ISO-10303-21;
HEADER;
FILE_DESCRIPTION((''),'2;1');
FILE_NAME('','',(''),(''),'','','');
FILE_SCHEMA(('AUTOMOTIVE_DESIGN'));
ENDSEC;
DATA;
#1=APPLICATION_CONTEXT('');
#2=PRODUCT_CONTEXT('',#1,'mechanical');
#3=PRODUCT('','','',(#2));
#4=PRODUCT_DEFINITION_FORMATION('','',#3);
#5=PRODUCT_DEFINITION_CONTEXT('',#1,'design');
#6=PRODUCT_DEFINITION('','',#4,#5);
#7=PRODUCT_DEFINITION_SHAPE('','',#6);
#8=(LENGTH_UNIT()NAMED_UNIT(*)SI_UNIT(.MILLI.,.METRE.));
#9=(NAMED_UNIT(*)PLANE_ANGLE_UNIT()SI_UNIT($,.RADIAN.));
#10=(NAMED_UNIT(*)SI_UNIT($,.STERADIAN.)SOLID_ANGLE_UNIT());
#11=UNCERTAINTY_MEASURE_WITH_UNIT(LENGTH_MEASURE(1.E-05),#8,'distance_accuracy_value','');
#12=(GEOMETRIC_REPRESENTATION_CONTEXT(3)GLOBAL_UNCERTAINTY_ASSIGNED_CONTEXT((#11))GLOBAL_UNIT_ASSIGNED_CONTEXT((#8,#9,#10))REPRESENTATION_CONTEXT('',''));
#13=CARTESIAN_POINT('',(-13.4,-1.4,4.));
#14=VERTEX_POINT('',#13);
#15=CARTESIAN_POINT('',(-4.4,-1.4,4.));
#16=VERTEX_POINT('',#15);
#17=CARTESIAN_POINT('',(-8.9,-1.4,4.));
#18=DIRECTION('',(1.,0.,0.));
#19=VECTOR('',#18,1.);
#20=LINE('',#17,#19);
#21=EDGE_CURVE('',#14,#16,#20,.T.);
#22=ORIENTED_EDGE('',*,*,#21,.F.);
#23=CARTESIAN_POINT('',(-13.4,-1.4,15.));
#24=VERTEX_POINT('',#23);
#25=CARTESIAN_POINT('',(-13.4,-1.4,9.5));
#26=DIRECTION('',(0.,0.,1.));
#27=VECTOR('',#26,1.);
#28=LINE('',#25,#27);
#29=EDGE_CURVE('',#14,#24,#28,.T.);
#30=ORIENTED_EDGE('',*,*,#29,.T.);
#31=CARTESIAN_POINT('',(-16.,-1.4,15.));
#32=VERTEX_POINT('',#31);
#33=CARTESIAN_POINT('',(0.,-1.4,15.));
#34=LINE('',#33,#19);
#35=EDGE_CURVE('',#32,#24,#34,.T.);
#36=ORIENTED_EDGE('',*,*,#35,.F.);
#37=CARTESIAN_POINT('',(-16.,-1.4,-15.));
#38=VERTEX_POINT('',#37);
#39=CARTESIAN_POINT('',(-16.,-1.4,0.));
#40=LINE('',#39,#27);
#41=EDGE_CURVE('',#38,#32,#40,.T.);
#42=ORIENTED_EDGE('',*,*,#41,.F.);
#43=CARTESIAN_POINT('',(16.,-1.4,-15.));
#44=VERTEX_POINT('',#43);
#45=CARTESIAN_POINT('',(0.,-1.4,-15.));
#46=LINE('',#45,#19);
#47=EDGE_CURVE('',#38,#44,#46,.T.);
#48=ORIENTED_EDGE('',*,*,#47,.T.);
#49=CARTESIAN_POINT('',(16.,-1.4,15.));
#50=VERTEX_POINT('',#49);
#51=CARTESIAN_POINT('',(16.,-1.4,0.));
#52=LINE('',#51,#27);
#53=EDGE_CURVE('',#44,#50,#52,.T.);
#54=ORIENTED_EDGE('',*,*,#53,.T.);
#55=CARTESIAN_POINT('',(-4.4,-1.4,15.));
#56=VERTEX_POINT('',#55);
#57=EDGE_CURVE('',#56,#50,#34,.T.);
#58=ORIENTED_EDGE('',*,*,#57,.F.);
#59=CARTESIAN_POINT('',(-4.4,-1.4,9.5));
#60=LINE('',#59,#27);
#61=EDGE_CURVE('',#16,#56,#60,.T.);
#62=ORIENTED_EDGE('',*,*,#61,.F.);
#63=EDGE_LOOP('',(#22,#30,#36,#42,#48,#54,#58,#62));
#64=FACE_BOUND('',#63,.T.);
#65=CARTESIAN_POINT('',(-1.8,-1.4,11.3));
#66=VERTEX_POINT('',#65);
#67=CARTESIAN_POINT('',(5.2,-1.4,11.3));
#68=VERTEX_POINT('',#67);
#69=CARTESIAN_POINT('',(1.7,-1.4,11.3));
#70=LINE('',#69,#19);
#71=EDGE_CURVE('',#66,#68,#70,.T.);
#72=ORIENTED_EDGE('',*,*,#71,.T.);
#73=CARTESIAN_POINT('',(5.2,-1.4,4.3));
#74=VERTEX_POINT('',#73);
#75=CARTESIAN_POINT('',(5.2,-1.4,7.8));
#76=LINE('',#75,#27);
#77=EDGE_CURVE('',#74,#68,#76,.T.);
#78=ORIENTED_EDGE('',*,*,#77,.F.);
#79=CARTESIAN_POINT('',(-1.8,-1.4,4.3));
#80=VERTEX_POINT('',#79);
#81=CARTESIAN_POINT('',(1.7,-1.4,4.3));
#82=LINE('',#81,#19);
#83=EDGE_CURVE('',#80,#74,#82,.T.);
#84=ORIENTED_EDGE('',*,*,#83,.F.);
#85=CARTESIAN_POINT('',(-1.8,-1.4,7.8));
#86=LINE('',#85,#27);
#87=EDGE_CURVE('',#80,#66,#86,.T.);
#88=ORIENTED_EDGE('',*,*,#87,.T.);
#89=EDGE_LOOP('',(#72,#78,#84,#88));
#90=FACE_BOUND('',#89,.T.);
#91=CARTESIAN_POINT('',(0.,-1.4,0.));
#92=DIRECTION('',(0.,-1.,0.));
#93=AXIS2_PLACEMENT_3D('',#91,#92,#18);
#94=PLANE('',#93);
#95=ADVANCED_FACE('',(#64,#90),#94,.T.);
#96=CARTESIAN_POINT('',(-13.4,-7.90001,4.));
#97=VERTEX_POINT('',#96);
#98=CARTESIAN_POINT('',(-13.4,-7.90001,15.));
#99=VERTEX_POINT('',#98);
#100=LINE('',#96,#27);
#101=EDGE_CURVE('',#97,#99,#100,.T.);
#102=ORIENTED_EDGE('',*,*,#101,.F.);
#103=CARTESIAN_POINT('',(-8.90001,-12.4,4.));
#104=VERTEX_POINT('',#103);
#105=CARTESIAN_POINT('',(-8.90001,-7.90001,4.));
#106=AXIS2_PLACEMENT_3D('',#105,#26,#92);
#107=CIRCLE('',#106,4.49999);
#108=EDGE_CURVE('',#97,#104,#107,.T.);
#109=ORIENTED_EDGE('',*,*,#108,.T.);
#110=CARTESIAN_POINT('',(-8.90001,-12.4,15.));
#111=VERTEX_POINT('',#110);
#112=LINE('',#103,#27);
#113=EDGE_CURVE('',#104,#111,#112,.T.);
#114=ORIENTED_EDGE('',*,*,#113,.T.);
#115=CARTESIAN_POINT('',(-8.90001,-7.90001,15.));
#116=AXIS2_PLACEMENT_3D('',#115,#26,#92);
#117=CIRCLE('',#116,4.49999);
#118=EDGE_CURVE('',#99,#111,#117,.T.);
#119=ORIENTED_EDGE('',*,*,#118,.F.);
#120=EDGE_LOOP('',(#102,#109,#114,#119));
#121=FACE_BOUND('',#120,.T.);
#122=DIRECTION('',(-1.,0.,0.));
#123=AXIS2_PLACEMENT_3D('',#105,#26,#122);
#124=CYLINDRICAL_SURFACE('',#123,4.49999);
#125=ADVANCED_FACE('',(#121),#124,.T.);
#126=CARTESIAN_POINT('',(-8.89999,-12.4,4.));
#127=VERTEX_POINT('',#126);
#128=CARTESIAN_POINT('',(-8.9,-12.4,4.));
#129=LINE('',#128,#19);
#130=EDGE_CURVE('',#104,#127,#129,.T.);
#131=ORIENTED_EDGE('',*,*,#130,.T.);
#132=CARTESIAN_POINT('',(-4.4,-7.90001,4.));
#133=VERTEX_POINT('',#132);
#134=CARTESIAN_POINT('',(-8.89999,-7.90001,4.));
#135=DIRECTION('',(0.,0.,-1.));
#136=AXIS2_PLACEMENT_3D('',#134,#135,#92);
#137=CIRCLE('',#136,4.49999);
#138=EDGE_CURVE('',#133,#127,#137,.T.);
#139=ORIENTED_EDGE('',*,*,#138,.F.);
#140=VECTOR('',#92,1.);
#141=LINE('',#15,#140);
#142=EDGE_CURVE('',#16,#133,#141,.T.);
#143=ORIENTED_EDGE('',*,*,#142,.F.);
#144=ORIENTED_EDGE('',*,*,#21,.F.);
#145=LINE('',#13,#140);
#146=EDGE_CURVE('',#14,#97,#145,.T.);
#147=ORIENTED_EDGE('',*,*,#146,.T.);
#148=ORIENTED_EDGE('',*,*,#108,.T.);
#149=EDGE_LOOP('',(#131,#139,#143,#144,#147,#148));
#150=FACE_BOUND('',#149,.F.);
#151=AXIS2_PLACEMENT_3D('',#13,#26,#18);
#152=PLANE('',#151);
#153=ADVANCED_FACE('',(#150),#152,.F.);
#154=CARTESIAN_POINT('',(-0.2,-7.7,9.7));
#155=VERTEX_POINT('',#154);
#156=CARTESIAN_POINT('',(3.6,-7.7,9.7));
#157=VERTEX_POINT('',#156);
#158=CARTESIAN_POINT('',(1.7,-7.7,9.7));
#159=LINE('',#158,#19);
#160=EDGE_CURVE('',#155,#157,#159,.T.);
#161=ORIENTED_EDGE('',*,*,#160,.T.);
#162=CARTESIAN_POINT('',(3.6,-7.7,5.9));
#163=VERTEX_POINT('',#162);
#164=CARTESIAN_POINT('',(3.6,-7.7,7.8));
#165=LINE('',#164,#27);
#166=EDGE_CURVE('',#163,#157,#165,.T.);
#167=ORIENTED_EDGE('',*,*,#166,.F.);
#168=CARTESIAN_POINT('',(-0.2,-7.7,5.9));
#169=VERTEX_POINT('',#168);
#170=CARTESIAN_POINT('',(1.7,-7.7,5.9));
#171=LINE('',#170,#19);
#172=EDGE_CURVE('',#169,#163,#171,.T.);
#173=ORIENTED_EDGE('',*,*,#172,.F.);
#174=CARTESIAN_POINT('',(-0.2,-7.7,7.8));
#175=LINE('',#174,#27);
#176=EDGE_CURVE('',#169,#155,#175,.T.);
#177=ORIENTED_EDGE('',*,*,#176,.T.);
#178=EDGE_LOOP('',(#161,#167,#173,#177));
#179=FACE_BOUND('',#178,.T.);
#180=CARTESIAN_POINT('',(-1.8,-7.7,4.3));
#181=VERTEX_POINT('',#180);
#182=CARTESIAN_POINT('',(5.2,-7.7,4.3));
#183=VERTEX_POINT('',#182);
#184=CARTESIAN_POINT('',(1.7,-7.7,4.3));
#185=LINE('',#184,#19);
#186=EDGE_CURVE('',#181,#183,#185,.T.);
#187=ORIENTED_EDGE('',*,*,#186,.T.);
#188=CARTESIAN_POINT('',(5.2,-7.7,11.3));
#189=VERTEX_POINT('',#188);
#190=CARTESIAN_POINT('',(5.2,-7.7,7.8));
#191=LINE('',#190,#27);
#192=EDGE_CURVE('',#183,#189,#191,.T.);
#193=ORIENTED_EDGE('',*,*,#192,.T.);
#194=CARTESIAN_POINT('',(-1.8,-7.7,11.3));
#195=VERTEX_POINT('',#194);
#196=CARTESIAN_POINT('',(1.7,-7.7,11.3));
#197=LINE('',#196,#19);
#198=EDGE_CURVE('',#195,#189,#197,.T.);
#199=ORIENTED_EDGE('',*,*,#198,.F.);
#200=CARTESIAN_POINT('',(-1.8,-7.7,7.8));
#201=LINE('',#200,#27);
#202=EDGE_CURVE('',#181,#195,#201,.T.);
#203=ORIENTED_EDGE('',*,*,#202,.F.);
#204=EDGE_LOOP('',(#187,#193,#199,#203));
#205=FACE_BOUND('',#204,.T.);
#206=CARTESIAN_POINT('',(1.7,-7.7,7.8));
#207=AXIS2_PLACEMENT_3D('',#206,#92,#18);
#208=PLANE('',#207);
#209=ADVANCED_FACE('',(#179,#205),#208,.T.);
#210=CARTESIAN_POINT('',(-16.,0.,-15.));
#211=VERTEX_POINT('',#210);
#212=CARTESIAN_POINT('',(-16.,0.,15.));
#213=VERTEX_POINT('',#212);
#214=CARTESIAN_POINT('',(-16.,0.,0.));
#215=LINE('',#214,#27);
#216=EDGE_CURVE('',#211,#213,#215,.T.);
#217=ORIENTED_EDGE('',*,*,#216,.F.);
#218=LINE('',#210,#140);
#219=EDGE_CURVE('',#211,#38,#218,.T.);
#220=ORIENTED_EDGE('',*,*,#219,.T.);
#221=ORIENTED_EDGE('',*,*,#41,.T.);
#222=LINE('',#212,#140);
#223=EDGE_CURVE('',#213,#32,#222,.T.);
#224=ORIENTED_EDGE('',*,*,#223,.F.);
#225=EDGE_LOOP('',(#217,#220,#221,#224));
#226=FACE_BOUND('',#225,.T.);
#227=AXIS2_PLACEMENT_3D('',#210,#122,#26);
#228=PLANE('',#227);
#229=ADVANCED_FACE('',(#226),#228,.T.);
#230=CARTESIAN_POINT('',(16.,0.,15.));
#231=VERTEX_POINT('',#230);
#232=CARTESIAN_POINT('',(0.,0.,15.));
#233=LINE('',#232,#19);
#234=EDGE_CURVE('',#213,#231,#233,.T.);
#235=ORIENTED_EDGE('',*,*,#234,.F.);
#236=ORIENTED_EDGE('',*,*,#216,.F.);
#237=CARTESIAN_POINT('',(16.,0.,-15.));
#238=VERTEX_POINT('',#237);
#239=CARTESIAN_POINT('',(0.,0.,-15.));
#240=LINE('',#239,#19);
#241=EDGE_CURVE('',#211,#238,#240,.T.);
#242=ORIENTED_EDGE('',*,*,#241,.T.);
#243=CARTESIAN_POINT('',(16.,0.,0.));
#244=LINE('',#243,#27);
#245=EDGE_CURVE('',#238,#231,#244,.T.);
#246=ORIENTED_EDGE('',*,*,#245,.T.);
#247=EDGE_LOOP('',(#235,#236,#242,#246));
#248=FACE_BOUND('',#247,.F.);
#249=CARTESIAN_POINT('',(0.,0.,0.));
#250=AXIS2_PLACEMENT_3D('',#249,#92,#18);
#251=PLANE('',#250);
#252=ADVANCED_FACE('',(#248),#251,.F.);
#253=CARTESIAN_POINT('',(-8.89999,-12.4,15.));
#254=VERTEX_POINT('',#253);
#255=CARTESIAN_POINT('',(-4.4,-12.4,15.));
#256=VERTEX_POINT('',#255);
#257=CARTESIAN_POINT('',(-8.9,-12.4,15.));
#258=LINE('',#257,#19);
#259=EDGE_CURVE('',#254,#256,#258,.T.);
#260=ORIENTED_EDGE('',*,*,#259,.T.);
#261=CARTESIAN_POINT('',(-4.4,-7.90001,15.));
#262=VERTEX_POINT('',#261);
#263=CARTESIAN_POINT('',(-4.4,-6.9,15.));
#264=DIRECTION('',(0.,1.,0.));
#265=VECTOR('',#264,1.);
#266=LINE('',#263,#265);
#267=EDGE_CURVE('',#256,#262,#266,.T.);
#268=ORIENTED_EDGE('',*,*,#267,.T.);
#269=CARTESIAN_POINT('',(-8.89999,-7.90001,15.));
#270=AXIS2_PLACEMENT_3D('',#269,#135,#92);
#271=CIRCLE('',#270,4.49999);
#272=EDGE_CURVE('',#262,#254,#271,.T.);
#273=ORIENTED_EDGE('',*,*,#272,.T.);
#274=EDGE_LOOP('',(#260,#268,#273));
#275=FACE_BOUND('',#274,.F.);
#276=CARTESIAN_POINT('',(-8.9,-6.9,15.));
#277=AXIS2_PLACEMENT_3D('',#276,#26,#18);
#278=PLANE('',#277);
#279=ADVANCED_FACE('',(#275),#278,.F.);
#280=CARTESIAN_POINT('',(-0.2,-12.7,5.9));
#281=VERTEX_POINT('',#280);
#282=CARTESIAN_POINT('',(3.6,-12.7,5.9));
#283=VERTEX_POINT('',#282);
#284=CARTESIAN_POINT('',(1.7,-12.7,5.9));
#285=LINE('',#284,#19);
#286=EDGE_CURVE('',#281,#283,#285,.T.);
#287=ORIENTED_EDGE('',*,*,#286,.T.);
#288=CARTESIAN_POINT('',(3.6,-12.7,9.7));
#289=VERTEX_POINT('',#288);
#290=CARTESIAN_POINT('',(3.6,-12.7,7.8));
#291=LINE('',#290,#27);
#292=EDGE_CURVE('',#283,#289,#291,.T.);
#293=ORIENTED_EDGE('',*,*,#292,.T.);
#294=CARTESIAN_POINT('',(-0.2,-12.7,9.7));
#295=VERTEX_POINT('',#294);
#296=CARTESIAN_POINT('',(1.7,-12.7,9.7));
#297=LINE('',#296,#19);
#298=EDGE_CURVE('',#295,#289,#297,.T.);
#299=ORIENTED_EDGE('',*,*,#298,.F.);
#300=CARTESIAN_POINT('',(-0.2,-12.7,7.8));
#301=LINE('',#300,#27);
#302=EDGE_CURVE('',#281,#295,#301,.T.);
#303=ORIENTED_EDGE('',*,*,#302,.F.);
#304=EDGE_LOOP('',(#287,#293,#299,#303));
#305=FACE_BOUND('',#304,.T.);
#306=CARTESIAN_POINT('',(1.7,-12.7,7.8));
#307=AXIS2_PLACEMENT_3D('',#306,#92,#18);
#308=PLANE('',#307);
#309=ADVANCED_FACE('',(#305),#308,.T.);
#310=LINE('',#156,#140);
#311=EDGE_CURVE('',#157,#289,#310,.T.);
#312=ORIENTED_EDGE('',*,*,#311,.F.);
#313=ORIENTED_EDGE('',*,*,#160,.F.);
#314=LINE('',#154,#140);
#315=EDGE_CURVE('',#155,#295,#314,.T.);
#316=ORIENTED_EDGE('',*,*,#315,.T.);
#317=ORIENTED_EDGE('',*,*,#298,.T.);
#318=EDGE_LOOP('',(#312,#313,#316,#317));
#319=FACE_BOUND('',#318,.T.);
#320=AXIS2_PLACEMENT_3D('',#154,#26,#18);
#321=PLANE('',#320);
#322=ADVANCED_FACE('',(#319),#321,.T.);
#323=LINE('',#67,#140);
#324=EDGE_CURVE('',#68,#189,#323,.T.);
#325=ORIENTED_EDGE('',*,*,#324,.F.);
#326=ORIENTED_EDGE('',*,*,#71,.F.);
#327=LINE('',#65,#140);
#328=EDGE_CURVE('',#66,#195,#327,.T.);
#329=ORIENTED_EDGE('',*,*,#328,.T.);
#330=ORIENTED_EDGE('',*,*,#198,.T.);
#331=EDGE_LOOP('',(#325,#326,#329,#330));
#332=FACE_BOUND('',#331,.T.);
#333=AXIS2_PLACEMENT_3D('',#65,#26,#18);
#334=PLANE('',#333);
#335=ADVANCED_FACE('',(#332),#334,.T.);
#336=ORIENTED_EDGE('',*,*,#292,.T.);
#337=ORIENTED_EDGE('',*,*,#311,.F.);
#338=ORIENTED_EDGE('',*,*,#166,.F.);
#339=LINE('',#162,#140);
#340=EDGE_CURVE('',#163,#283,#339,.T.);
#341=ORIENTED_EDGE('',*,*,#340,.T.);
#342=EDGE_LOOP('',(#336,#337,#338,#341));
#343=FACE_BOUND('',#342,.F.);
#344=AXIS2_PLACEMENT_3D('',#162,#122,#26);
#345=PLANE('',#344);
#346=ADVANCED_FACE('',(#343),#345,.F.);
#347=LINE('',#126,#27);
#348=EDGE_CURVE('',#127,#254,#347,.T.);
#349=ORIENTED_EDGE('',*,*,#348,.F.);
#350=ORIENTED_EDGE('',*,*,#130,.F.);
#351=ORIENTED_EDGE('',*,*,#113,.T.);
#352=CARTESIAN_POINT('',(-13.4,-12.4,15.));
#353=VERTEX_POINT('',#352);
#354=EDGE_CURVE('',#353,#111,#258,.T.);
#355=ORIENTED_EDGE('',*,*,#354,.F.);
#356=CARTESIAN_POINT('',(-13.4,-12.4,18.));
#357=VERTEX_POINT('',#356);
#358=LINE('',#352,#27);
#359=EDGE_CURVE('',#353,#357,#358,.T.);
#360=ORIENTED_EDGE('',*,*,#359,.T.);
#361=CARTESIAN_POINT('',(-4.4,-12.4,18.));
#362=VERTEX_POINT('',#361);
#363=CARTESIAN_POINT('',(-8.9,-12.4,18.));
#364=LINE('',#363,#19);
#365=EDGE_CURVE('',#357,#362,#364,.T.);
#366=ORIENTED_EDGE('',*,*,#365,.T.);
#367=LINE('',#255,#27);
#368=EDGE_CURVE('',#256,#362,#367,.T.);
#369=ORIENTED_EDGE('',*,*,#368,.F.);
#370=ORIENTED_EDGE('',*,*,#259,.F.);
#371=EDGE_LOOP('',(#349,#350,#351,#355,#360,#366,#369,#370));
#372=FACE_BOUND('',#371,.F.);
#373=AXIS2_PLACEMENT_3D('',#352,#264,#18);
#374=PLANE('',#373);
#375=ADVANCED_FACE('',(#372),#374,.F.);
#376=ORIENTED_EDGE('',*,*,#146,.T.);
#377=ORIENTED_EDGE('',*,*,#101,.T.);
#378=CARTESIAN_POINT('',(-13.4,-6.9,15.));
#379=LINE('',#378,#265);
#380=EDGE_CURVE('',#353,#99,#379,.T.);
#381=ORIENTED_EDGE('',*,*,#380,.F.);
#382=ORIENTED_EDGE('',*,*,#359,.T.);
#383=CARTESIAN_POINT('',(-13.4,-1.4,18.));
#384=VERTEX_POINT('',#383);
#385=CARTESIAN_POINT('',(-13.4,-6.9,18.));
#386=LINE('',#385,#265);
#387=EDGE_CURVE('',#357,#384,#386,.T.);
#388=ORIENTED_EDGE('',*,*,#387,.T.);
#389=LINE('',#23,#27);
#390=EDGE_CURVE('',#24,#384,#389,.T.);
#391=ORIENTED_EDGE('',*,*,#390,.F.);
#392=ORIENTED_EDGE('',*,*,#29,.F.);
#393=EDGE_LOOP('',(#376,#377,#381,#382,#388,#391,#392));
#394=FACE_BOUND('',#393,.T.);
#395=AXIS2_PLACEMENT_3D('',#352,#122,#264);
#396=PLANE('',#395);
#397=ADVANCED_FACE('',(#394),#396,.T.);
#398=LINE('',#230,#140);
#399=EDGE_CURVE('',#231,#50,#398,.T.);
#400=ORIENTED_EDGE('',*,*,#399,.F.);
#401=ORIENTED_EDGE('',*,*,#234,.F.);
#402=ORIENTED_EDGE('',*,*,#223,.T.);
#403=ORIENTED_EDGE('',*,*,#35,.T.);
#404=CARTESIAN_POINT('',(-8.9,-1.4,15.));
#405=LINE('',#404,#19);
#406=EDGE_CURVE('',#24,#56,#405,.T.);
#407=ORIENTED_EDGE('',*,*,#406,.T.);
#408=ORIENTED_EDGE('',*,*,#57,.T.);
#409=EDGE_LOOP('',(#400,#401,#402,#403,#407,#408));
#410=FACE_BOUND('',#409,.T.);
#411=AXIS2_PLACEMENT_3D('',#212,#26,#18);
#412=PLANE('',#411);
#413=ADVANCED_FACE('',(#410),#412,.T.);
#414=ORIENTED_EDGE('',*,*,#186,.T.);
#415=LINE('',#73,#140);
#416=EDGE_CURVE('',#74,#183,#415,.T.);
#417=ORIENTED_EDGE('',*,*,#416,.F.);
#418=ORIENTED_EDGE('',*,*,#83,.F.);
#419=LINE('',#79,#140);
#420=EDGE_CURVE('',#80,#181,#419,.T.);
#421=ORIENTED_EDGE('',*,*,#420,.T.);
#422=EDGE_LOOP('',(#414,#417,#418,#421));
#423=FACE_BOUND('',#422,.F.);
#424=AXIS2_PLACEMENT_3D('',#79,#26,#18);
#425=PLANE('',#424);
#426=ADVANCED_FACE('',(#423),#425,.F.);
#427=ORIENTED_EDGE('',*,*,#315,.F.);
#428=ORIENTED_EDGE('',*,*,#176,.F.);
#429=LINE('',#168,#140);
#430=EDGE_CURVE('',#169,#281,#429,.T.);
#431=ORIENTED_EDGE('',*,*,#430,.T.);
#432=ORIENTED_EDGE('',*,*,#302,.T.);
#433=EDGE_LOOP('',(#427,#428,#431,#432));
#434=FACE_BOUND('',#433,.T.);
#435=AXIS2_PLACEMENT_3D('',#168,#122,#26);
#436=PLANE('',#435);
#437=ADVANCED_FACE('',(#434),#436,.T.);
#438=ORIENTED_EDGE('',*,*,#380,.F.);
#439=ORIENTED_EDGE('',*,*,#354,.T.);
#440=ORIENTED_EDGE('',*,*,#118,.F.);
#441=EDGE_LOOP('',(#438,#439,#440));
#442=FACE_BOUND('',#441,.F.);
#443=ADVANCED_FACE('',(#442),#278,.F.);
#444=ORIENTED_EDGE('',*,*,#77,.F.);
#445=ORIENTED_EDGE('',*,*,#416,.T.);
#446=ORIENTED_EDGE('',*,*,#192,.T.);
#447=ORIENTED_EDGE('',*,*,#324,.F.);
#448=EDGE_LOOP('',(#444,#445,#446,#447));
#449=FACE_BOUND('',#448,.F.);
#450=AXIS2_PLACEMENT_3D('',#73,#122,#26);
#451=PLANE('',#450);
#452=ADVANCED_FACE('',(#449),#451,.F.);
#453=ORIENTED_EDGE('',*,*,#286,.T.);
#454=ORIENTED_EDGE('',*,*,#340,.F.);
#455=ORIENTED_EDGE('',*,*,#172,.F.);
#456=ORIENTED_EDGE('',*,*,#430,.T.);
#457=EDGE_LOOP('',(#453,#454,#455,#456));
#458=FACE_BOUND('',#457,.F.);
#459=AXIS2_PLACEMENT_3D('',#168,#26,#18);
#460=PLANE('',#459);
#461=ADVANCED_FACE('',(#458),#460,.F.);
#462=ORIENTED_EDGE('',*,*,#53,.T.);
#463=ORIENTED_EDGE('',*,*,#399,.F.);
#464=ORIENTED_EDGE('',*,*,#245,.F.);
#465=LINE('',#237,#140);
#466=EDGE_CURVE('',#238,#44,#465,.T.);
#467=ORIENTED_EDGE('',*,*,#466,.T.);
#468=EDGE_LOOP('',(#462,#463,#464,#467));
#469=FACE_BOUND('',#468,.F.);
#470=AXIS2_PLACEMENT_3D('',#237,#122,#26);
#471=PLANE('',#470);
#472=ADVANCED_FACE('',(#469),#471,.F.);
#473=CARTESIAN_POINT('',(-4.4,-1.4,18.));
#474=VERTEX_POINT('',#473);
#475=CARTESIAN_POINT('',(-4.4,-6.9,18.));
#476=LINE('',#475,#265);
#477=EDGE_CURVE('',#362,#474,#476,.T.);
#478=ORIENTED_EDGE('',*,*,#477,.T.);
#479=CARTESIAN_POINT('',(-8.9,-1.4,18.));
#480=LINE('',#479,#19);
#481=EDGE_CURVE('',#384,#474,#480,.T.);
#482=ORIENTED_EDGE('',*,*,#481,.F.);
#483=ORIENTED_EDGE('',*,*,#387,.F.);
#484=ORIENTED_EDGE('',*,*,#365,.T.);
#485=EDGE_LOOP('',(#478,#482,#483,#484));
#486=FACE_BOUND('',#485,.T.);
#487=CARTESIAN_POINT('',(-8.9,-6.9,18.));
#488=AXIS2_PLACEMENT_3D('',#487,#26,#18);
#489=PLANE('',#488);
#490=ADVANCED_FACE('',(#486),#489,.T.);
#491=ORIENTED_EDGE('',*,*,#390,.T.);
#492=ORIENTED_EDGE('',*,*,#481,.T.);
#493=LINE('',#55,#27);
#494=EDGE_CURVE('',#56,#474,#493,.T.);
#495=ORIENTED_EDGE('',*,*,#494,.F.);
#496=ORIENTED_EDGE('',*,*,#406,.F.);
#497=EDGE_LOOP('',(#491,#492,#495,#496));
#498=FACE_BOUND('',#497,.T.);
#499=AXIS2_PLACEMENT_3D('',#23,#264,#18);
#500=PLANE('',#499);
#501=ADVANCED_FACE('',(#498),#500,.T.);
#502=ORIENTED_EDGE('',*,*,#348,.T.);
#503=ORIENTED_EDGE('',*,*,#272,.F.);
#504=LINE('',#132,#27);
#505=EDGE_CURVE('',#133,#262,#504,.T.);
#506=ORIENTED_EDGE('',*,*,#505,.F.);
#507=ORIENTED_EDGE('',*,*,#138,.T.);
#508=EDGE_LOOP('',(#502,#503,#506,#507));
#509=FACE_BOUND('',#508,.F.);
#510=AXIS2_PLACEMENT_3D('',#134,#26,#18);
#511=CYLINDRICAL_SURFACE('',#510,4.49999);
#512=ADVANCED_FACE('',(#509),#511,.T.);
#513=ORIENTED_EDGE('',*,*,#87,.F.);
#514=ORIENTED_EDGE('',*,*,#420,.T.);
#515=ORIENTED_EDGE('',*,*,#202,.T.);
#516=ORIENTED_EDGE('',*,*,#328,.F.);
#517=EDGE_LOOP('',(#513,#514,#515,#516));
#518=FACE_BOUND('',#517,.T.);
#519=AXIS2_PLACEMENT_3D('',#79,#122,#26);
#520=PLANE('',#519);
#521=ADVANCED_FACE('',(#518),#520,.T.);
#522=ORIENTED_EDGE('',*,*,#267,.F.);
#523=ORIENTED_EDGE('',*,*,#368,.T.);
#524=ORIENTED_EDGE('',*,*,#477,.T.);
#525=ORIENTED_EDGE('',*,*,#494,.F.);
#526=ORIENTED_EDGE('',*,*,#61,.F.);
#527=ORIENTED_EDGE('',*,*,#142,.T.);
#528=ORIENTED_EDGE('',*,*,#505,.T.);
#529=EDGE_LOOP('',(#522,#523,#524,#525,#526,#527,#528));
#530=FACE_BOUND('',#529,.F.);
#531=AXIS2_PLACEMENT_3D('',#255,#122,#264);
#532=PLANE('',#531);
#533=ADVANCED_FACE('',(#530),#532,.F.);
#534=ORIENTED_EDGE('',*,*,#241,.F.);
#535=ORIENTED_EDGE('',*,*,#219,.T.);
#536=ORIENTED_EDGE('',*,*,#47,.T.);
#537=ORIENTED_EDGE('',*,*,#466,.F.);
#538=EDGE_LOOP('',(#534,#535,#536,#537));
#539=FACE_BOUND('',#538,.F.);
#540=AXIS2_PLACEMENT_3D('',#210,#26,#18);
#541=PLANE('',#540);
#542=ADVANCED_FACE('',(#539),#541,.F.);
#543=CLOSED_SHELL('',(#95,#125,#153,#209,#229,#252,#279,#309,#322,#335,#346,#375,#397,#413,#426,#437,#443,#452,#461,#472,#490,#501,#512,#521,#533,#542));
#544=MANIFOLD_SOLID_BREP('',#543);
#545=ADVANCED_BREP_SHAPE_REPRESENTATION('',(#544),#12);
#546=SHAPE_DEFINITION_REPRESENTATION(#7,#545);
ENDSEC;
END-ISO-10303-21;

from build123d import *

# Parameters (mm, degrees)
F0_W      = 32
F0_H      = 30
F1_DEPTH  = 1.4
F2_W      = 9
F2_H      = 11
F3_DEPTH  = 11
F4_R      = 4.49999
F6_W      = 7
F6_H      = 7
F7_DEPTH  = 6.3
F8_W      = 3.8
F8_H      = 3.8
F9_DEPTH  = 5
F5_W      = 9
F5_H      = 11
F10_DEPTH = 3


# Not quite as in the source:
# - a fillet or chamfer is up to 0.001 mm smaller than in the source, because OpenCascade refuses the exact size


with BuildPart() as f1:
    # F0 (on Front) → F1 (new body)
    with BuildSketch(Plane.XZ):
        Rectangle(F0_W, F0_H)
    extrude(amount=F1_DEPTH)

    # F2 (on face) → F3 (join)
    with BuildSketch(Plane.XZ.offset(1.4)):
        with Locations((-8.9, 9.5)):
            Rectangle(F2_W, F2_H)
    extrude(amount=F3_DEPTH)

    # F4 (radius 4.5 in the source; OpenCascade refuses exactly that, so slightly less here)
    f4_edges = [f1.edges().sort_by_distance(p)[0] for p in [
        (-4.4, -12.4, 9.5),
        (-13.4, -12.4, 9.5),
    ]]
    fillet(f4_edges, radius=F4_R)

    # F6 (on face) → F7 (join)
    with BuildSketch(Plane.XZ.offset(1.4)):
        with Locations((1.7, 7.8)):
            Rectangle(F6_W, F6_H)
    extrude(amount=F7_DEPTH)

    # F8 (on face) → F9 (join)
    with BuildSketch(Plane.XZ.offset(7.7)):
        with Locations((1.7, 7.8)):
            Rectangle(F8_W, F8_H)
    extrude(amount=F9_DEPTH)

    # F5 (on face) → F10 (join)
    with BuildSketch(Plane.XY.offset(15)):
        with Locations((-8.9, -6.9)):
            Rectangle(F5_W, F5_H)
    extrude(amount=F10_DEPTH)


solid = f1.part
